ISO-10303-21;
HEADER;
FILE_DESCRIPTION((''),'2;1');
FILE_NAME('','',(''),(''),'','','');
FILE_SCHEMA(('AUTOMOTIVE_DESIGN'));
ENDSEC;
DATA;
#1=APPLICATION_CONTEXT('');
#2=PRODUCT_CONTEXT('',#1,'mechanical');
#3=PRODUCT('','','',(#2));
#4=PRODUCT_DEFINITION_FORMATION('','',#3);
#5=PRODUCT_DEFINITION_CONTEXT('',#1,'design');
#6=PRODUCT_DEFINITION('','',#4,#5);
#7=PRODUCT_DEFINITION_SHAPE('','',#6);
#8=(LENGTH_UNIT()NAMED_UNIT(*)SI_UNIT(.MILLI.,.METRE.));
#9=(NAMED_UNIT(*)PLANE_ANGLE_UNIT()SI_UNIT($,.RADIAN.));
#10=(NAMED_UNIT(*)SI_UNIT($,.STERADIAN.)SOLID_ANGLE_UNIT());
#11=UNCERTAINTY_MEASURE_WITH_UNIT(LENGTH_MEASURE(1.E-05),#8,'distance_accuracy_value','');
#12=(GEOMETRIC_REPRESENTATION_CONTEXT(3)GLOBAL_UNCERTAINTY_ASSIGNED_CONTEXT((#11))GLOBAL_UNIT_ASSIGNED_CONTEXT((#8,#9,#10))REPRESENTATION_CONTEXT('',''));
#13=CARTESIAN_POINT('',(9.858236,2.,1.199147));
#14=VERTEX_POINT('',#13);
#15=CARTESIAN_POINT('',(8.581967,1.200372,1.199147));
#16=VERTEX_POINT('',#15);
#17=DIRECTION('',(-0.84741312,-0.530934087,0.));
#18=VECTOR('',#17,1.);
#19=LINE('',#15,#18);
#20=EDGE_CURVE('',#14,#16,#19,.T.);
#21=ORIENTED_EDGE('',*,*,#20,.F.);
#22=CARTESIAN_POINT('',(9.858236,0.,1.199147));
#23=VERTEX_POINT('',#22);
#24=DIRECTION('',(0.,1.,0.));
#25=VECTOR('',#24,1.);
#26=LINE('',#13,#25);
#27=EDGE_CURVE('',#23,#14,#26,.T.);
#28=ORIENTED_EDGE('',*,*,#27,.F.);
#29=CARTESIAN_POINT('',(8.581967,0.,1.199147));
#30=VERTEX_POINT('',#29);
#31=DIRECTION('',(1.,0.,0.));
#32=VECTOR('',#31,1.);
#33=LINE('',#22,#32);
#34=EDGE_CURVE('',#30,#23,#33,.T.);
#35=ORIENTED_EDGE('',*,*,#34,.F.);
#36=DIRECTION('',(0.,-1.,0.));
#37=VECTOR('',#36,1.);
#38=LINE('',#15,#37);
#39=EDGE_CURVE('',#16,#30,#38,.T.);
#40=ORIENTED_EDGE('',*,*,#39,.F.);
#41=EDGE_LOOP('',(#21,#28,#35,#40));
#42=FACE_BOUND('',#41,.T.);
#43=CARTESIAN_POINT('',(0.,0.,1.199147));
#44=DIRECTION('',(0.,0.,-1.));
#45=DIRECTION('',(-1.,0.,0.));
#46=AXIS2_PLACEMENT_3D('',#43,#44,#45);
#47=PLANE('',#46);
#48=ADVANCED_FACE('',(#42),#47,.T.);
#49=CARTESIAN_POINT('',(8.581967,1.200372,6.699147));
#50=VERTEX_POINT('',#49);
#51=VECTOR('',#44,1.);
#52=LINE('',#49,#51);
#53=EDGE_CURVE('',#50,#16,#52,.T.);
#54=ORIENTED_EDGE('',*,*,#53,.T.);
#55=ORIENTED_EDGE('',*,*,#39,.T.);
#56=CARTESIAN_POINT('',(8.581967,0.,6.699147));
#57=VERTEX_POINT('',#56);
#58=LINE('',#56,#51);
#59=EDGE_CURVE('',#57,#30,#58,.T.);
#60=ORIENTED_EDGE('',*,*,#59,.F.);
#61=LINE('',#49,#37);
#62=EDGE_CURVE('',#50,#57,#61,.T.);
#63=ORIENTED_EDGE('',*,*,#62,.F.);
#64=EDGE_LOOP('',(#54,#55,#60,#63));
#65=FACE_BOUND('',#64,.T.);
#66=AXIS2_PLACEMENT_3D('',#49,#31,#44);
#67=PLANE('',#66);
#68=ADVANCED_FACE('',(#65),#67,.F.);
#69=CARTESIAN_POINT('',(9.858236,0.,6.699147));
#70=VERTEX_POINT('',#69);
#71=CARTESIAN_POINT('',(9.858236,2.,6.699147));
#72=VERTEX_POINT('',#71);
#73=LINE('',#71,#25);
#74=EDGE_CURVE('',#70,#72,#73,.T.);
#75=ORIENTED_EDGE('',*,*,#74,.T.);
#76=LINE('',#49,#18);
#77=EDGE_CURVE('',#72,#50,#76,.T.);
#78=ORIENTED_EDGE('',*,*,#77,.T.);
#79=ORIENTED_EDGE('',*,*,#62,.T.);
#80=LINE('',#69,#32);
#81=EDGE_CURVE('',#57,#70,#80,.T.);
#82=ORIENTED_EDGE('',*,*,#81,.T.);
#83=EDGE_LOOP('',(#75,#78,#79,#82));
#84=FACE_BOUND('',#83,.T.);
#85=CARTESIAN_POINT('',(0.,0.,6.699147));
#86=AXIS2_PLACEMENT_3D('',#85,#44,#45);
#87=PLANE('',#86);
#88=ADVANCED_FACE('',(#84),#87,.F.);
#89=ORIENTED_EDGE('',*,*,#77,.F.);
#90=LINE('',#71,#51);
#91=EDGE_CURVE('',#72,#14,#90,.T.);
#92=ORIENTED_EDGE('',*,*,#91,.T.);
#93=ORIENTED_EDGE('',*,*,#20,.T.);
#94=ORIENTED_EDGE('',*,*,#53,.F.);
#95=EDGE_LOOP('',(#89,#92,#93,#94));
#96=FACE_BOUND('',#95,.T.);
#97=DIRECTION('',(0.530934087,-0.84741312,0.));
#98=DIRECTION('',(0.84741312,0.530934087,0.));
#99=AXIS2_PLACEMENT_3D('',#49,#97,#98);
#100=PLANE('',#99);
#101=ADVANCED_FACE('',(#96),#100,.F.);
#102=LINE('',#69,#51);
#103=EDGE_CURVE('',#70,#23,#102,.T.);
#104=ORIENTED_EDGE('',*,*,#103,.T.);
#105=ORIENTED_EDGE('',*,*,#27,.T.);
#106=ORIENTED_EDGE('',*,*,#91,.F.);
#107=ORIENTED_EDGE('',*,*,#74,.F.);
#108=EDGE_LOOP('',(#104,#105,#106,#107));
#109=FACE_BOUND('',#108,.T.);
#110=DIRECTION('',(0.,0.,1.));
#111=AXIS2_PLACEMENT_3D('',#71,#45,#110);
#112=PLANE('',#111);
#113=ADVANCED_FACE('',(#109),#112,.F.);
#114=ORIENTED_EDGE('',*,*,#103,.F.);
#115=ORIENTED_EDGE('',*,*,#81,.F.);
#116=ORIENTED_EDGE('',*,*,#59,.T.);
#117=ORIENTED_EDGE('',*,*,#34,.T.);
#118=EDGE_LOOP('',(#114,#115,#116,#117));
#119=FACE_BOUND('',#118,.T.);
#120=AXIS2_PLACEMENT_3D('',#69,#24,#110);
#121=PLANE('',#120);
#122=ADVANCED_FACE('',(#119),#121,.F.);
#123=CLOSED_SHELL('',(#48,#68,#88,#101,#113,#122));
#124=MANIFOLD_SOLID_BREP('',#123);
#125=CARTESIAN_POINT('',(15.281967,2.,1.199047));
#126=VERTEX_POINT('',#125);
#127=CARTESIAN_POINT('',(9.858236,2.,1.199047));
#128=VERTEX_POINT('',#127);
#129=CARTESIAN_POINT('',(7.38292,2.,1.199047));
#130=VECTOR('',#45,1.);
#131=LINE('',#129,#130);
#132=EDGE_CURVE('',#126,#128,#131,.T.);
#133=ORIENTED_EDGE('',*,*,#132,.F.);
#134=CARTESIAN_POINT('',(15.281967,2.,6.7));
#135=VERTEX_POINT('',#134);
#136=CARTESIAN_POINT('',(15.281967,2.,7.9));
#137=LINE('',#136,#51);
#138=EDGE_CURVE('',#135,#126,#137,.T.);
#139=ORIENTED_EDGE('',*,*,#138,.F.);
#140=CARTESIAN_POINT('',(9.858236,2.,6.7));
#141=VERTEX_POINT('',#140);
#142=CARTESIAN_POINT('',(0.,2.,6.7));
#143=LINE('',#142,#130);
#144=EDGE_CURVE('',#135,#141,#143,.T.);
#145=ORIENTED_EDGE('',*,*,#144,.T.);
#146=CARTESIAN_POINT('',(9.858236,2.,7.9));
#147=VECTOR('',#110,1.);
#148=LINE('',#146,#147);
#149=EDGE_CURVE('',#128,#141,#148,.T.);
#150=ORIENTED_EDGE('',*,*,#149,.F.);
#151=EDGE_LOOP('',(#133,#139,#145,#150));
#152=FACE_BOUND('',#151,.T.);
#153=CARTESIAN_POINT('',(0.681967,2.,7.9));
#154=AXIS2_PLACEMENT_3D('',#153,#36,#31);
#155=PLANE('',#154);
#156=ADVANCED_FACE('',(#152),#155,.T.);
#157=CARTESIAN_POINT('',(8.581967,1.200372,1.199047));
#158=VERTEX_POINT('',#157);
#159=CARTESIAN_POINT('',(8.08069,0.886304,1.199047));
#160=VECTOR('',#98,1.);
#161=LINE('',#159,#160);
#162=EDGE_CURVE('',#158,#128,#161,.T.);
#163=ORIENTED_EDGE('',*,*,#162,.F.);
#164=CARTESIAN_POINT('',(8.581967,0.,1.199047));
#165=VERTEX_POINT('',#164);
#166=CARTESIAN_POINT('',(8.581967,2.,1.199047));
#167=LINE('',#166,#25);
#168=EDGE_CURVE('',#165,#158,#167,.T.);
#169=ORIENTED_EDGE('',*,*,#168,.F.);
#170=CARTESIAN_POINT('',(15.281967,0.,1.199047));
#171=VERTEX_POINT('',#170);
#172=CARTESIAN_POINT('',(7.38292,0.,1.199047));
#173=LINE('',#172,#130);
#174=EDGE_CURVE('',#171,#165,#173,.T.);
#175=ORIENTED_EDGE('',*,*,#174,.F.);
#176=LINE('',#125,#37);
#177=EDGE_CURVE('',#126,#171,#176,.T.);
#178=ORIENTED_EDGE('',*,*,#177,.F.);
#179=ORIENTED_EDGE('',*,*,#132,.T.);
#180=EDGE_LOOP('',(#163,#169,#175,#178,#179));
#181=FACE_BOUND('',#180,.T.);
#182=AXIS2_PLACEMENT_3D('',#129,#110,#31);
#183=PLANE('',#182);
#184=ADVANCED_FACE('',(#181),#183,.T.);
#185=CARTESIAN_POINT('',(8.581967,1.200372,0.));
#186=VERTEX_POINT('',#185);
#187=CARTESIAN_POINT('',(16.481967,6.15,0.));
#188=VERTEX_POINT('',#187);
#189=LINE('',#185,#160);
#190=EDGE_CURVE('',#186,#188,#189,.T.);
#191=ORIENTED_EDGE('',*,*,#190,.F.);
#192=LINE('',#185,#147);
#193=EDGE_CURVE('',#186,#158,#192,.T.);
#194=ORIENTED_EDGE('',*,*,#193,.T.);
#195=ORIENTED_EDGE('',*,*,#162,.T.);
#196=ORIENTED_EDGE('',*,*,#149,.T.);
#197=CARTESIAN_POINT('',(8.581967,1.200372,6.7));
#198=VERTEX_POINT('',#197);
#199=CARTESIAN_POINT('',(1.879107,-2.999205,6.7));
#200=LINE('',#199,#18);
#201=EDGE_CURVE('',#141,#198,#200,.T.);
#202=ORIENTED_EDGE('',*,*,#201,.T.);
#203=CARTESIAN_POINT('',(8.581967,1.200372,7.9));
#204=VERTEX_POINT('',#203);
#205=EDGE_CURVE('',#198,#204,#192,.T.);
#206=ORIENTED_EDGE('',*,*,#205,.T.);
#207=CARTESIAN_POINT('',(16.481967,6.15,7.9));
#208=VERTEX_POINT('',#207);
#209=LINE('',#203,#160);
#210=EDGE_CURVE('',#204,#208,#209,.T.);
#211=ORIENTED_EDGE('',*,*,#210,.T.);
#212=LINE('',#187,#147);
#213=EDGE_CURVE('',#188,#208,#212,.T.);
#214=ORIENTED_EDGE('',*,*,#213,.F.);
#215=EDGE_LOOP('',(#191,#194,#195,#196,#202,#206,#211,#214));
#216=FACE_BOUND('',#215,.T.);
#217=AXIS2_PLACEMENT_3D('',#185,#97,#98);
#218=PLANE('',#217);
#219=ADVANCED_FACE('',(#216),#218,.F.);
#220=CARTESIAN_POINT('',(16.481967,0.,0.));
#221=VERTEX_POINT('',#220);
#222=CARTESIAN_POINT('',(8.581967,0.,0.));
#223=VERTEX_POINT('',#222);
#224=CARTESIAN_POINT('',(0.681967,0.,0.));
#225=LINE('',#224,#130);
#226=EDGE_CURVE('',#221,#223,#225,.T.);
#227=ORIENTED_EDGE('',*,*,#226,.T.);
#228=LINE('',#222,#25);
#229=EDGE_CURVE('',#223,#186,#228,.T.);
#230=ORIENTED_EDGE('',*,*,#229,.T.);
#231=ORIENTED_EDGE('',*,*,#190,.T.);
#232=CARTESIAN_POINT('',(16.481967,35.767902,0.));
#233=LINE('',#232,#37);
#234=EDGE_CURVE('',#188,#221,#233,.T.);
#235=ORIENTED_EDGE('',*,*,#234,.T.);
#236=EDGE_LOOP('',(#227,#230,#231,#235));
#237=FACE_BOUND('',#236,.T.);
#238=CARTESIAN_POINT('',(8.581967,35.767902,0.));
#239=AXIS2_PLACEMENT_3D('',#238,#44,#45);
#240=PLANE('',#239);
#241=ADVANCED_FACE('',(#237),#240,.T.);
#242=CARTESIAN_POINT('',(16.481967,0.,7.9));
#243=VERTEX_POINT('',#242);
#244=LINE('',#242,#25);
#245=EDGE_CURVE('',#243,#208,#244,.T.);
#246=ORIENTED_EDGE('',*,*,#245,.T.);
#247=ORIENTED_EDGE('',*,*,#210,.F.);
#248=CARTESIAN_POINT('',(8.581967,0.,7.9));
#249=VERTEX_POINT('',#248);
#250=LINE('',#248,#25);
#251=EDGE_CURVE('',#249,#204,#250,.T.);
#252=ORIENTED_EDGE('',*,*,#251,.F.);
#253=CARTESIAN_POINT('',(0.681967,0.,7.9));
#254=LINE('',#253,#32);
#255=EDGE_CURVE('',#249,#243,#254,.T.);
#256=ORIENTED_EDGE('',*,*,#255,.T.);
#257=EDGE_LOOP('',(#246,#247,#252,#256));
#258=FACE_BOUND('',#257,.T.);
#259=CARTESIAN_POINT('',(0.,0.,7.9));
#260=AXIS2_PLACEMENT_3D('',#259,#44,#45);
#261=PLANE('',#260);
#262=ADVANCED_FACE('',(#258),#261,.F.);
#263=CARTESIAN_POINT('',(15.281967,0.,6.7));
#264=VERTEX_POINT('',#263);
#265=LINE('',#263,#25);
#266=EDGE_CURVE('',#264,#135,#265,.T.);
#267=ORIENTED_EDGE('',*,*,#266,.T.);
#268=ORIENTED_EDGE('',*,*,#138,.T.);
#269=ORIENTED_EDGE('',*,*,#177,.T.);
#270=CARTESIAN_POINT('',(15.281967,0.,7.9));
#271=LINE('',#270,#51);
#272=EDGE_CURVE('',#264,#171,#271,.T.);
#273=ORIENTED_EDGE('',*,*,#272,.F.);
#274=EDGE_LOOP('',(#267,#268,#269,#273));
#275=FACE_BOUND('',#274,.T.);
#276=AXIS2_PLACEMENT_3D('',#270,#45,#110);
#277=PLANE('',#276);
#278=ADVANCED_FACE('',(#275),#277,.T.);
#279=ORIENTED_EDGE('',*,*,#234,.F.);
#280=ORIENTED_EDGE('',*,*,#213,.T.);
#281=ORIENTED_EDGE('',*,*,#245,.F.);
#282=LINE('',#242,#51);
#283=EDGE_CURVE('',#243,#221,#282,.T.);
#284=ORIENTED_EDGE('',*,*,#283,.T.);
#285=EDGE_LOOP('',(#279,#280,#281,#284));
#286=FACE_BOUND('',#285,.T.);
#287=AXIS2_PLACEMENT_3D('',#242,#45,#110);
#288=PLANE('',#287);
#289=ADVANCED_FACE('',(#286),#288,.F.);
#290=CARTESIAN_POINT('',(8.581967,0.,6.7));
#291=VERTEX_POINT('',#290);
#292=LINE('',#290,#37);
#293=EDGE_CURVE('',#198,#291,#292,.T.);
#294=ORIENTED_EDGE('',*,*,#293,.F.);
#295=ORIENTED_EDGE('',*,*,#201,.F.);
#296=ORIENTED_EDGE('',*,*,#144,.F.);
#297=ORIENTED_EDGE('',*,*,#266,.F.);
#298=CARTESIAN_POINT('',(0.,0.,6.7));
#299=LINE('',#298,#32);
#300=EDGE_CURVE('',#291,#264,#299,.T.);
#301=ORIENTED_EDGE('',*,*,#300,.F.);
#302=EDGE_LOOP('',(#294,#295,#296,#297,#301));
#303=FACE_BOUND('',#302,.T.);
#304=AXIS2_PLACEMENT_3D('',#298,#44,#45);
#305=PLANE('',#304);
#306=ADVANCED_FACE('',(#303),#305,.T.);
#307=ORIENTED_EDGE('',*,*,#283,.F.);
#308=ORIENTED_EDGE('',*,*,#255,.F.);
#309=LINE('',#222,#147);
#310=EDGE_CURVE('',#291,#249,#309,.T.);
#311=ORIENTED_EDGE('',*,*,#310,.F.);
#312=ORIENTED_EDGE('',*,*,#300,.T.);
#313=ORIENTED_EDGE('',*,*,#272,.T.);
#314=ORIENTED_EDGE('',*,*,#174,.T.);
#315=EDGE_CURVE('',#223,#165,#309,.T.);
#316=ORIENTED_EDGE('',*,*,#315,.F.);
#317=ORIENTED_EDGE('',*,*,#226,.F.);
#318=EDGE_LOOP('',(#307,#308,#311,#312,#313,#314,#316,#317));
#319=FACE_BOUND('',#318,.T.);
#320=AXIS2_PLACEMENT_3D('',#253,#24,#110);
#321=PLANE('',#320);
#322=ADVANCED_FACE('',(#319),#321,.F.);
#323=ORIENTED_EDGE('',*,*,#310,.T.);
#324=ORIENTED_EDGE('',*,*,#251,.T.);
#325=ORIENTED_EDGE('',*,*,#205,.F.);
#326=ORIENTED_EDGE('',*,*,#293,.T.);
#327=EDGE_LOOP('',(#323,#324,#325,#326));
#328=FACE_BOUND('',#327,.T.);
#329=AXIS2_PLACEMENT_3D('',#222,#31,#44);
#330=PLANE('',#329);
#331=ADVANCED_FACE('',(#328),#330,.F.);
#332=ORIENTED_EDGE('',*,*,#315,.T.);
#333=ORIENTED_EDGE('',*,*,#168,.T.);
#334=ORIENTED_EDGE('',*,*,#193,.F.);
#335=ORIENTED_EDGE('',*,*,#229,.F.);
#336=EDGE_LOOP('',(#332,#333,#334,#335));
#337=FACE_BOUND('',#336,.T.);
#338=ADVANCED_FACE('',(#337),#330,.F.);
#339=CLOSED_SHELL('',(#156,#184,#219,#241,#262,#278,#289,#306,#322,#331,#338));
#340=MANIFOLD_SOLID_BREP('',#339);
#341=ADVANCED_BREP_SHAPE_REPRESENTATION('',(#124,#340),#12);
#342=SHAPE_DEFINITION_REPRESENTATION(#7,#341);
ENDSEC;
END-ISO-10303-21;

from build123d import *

# Parameters (mm, degrees)
MAINBASESKETCH_W          = 15.8
MAINBASESKETCH_H          = 3.2
MAINBASEEXTRUDE_DEPTH     = 7.9
STUDSSKETCH_R             = 2.4
STUDSEXTRUDE_DEPTH        = 1.6
MAINBASESHELL_T           = -1.2
LCUTBLUE_DEPTH            = 19.555463972
LCUTBLUE_DEPTH_BACK       = 19.555463972
CUTADDEDTOLCUT_DEPTH      = 2
MADESLIMCUTSKETCH_W       = 7.9
MADESLIMCUTSKETCH_H       = 7.9
MADESLIMCUT_DEPTH         = 19.897228453
MADESLIMFILLEXT_REACH     = 20.555
SKETCH33_W                = 5.500952983
SKETCH33_H                = 1.199047018
ANGLEDSLIMBASECUT_DEPTH   = 19.555463972
ANGLEDSLIMBASESWEEP_DEPTH = 7.9
CUT_EXTRUDE24_DEPTH       = 20.284391181
BOSS_EXTRUDE17_START      = 0.0001
BOSS_EXTRUDE17_DEPTH      = 5.5


# Read off the part's stored shape, not the designer's step: AngledSlimBaseSweep
with BuildPart() as part:
    # MainBaseSketch → MainBaseExtrude (new, symmetric)
    with BuildSketch(Plane.XY):
        with Locations((8.581967213, 1.6)):
            Rectangle(MAINBASESKETCH_W, MAINBASESKETCH_H)
    extrude(amount=MAINBASEEXTRUDE_DEPTH, both=True)

    # StudsSketch → StudsExtrude (add)
    with BuildSketch(Plane(origin=(0, 3.2, 0), x_dir=(1, 0, 0), z_dir=(0, 1, 0))):
        with Locations((4.581967213, 4)):
            Circle(STUDSSKETCH_R)
    extrude(amount=STUDSEXTRUDE_DEPTH)

    # MainBaseShell
    mainbaseshell_openings = [part.faces().sort_by_distance(p)[0] for p in [
        (8.581967213, 0, 0),
    ]]
    offset(amount=MAINBASESHELL_T, openings=mainbaseshell_openings, kind=Kind.INTERSECTION)

    # LCUTBlueSketch → LCutBlue (cut, two sides: drawn at the far end of the back side and taken through both)
    with BuildSketch(Plane(origin=(0, 3.2, 0), x_dir=(1, 0, 0), z_dir=(0, 1, 0)).offset(-LCUTBLUE_DEPTH_BACK)):
        Polygon((8.581967213, 53.229874044), (8.581967213, 7.9), (8.581967213, 0), (16.481967213, 0), (61.811841258, 0), (125.917963912, 64.106122654), (72.688089868, 117.335996699), align=None)
    extrude(amount=LCUTBLUE_DEPTH + LCUTBLUE_DEPTH_BACK, mode=Mode.SUBTRACT)

    # CutAddedtoLSketch → CutAddedToLCut (add)
    with BuildSketch(Plane.XZ):
        Polygon((7.382920196, -6.7), (8.581967213, -6.7), (8.581967213, 0), (15.281967213, 0), (15.281967213, 1.199047018), (7.382920196, 1.199047018), (7.382920196, 0), align=None)
    extrude(amount=-CUTADDEDTOLCUT_DEPTH)

    # MadeSlimCutSketch → MadeSlimCut (cut, through all)
    with BuildSketch(Plane.XZ):
        with Locations((4.631967213, -3.95)):
            Rectangle(MADESLIMCUTSKETCH_W, MADESLIMCUTSKETCH_H)
    extrude(amount=-MADESLIMCUT_DEPTH, mode=Mode.SUBTRACT)

    # Sketch33 → MadeSlimFillExt (add, up to next)
    with BuildSketch(Plane.XZ, mode=Mode.PRIVATE) as madeslimfillext_sk1:
        with Locations((4.632443704, 0.599523509)):
            Rectangle(SKETCH33_W, SKETCH33_H)
    madeslimfillext_tool1 = extrude(madeslimfillext_sk1.sketch, amount=-MADESLIMFILLEXT_REACH, mode=Mode.PRIVATE) - part.part
    add(madeslimfillext_tool1.solids().sort_by_distance((4.632444, 0, 0.599524))[0])

    # AngledSlimBaseSketch → AngledSlimBaseCut (cut, through all)
    with BuildSketch(Plane.XY.offset(7.9)):
        Polygon((16.481967213, 6.15), (0.681967213, 2.247699421), (16.481967213, 2.247699421), align=None)
    extrude(amount=-ANGLEDSLIMBASECUT_DEPTH, mode=Mode.SUBTRACT)


with BuildPart() as body_2:
    # of the pieces the cut leaves, the one that is kept (angledslimbasecut_keep)
    add(part.part.solids().sort_by_distance((0.681967213, 0, 7.9))[0])

    # AngledSlimBaseSweep outline → AngledSlimBaseSweep (add)
    with BuildSketch(Plane.XY):
        Polygon((16.481967213, 2.247699421), (16.481967213, 6.15), (0.681967213, 2.247699421), align=None)
    extrude(amount=ANGLEDSLIMBASESWEEP_DEPTH)

    # Sketch89 → Cut-Extrude24 (cut, through all)
    with BuildSketch(Plane.XY.offset(7.9)):
        Polygon((8.581967213, 0), (8.581967213, 1.200372495), (16.481967213, 6.15), (0.681967213, 2.247699421), (0.681967213, 0), align=None)
    extrude(amount=-CUT_EXTRUDE24_DEPTH, mode=Mode.SUBTRACT)


with BuildPart() as body_2_2:
    # Sketch93 → Boss-Extrude17 (new body)
    with BuildSketch(Plane.XY.offset(1.199047018).offset(BOSS_EXTRUDE17_START)):
        Polygon((8.581967213, 1.200372495), (9.858236444, 2), (9.858236444, 0), (8.581967213, 0), align=None)
    extrude(amount=BOSS_EXTRUDE17_DEPTH)


solid = Compound([body_2.part, body_2_2.part])
